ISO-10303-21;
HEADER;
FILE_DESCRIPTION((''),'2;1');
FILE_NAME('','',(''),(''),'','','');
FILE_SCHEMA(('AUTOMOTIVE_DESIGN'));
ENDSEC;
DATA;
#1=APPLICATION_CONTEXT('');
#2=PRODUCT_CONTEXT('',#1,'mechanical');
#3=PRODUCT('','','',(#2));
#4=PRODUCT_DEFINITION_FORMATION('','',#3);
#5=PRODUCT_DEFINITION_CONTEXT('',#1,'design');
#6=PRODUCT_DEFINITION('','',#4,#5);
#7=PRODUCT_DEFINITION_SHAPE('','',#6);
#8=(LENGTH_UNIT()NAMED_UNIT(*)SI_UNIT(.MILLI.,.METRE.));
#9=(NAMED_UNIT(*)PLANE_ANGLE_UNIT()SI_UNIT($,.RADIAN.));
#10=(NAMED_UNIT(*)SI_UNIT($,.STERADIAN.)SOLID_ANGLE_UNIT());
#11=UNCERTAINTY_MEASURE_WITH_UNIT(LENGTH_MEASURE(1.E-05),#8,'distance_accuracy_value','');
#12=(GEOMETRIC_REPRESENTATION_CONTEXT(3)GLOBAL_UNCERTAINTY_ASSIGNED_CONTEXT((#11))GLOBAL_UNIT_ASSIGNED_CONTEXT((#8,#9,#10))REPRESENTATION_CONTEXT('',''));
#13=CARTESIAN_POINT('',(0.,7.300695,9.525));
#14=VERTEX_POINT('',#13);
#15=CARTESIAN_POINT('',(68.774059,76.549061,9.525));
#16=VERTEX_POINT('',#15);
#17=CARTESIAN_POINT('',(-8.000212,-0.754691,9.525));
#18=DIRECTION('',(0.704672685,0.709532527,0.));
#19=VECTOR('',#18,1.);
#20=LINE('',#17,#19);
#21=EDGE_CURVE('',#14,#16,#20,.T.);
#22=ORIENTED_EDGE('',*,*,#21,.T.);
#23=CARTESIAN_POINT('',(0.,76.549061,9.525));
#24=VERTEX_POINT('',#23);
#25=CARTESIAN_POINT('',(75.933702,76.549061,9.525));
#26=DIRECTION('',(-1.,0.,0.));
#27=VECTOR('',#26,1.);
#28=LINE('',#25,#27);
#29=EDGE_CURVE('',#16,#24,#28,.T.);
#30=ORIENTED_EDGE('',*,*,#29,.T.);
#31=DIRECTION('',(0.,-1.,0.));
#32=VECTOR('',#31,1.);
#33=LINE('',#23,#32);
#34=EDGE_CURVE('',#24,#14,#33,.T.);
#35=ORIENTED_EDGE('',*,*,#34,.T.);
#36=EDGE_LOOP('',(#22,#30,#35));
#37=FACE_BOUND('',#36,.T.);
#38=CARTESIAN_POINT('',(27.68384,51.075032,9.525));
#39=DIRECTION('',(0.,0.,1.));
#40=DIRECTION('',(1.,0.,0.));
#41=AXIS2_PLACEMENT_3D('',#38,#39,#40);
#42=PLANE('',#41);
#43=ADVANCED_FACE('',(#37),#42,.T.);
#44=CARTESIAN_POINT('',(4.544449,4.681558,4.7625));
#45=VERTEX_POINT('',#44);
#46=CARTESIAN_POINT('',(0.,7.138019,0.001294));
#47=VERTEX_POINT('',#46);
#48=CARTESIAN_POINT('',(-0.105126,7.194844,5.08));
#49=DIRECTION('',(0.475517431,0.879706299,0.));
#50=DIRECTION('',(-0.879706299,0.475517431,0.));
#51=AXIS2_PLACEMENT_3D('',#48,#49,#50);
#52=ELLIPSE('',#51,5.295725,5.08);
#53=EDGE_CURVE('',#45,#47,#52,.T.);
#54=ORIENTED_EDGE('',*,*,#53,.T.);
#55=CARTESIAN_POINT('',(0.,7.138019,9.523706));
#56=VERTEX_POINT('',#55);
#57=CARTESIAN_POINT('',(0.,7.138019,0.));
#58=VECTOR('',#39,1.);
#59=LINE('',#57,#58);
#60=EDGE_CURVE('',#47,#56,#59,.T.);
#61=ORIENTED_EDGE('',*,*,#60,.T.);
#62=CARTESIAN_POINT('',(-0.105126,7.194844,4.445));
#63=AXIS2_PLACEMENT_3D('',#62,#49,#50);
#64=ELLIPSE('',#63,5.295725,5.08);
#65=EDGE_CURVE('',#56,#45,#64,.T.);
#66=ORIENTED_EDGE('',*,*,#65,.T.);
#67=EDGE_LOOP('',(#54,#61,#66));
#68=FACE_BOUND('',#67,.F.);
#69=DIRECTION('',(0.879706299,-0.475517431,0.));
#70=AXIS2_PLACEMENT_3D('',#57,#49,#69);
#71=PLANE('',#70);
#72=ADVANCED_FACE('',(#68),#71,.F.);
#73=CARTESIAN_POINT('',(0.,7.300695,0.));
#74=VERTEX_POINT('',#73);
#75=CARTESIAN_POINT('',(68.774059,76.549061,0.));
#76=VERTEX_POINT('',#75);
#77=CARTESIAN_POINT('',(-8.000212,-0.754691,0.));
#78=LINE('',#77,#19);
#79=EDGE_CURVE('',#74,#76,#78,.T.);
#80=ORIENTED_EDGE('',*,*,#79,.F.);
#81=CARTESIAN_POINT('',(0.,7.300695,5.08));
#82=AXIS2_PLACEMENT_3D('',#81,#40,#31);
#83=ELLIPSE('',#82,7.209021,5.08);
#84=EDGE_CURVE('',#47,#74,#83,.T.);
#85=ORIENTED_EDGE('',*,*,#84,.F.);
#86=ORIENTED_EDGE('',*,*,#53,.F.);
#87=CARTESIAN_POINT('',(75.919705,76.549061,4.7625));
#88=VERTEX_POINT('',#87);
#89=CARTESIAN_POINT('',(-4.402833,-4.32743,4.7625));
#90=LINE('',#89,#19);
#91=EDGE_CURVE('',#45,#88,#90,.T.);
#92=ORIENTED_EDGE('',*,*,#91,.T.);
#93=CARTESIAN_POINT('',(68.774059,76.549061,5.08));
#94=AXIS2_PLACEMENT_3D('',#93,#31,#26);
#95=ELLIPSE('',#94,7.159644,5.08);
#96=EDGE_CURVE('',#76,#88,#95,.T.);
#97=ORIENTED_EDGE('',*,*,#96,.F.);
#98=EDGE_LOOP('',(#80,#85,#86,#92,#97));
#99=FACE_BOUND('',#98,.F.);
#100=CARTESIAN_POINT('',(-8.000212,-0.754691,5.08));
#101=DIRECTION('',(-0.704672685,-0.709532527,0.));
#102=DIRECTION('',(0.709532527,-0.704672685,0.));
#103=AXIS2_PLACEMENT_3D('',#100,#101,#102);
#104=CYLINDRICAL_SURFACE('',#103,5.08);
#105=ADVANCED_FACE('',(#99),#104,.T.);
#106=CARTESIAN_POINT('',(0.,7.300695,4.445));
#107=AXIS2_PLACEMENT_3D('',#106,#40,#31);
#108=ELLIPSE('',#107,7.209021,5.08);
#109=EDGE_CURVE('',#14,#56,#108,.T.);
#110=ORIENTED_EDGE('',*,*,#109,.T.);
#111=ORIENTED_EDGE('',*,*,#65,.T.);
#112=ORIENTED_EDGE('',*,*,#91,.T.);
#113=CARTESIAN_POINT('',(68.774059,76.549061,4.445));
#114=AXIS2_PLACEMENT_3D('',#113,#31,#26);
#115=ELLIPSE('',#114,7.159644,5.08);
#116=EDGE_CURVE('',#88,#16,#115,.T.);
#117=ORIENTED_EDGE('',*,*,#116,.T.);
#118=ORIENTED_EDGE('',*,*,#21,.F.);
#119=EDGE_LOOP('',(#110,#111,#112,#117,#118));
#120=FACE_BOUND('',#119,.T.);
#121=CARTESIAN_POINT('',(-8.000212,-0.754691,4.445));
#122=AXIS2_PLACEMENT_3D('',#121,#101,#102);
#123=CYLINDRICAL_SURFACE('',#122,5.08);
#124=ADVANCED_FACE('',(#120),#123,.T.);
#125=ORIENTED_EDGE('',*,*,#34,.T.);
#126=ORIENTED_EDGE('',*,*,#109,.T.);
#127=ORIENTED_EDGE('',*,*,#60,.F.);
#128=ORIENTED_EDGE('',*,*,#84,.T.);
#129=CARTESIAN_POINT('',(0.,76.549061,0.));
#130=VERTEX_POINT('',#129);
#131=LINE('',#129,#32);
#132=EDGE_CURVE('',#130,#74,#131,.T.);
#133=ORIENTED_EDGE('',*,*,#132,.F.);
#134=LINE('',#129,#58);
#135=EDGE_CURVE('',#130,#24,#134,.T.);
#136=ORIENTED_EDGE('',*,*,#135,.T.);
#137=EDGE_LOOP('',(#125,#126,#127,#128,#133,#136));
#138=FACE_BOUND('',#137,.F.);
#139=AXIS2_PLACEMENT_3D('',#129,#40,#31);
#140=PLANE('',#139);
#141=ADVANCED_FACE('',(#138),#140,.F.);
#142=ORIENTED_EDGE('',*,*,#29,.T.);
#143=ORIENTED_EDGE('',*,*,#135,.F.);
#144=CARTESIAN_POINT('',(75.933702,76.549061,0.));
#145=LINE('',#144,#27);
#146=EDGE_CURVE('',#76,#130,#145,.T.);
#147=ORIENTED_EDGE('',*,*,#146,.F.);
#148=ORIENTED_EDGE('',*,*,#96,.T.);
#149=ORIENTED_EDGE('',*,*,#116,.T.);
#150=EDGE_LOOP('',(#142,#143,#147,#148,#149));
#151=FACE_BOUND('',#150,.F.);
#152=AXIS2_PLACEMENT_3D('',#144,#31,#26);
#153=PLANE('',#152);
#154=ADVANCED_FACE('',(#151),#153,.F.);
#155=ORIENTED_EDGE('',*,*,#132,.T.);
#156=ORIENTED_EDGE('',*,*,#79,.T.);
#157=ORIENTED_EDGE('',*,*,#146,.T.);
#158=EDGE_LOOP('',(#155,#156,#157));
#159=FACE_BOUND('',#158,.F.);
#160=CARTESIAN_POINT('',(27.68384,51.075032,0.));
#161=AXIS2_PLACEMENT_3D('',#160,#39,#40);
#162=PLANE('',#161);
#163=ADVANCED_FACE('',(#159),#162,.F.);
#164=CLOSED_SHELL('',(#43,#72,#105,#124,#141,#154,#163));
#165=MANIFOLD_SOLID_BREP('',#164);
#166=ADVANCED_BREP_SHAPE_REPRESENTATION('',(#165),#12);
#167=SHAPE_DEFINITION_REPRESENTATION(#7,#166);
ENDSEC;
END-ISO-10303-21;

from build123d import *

# Parameters (mm, degrees)
F1_DEPTH    = 9.525
F2_T1_DEPTH = 126.6954628883


# Not quite as in the source:
# - a fillet or chamfer that OpenCascade refuses, or shapes differently, is made with other operations: its cross-section is extruded or revolved along the edge and cut away or added


with BuildPart() as f1:
    # F0 (on Top) → F1 (new body)
    with BuildSketch(Plane.XY):
        Polygon((0, 76.5490606427), (0, 7.1380194277), (4.5535564423, 4.6766349114), (75.9337022901, 76.5490606427), align=None)
    extrude(amount=F1_DEPTH)

    # F2: fillet of radius 5.08 on 2 edges, made by hand

    # F2_s2 → F2_t1 (cut)
    with BuildSketch(Plane(origin=(-4.3499505247, -4.3799503673, 0), x_dir=(0, 0, 1), z_dir=(0.7046726854, 0.7095325267, 0))):
        with BuildLine():
            ThreePointArc((5.08, -0.0646004733), (1.4878975516, -1.5524980249), (0, -5.1446004733))
            Line((0, -5.1446004733), (0, -0.0646004733))
            Line((0, -0.0646004733), (5.08, -0.0646004733))
        make_face()
        with BuildLine():
            ThreePointArc((4.445, -0.0646004733), (8.0371024484, -1.5524980249), (9.525, -5.1446004733))
            Line((9.525, -5.1446004733), (9.525, -0.0646004733))
            Line((9.525, -0.0646004733), (4.445, -0.0646004733))
        make_face()
    extrude(amount=F2_T1_DEPTH, mode=Mode.SUBTRACT)


solid = f1.part
